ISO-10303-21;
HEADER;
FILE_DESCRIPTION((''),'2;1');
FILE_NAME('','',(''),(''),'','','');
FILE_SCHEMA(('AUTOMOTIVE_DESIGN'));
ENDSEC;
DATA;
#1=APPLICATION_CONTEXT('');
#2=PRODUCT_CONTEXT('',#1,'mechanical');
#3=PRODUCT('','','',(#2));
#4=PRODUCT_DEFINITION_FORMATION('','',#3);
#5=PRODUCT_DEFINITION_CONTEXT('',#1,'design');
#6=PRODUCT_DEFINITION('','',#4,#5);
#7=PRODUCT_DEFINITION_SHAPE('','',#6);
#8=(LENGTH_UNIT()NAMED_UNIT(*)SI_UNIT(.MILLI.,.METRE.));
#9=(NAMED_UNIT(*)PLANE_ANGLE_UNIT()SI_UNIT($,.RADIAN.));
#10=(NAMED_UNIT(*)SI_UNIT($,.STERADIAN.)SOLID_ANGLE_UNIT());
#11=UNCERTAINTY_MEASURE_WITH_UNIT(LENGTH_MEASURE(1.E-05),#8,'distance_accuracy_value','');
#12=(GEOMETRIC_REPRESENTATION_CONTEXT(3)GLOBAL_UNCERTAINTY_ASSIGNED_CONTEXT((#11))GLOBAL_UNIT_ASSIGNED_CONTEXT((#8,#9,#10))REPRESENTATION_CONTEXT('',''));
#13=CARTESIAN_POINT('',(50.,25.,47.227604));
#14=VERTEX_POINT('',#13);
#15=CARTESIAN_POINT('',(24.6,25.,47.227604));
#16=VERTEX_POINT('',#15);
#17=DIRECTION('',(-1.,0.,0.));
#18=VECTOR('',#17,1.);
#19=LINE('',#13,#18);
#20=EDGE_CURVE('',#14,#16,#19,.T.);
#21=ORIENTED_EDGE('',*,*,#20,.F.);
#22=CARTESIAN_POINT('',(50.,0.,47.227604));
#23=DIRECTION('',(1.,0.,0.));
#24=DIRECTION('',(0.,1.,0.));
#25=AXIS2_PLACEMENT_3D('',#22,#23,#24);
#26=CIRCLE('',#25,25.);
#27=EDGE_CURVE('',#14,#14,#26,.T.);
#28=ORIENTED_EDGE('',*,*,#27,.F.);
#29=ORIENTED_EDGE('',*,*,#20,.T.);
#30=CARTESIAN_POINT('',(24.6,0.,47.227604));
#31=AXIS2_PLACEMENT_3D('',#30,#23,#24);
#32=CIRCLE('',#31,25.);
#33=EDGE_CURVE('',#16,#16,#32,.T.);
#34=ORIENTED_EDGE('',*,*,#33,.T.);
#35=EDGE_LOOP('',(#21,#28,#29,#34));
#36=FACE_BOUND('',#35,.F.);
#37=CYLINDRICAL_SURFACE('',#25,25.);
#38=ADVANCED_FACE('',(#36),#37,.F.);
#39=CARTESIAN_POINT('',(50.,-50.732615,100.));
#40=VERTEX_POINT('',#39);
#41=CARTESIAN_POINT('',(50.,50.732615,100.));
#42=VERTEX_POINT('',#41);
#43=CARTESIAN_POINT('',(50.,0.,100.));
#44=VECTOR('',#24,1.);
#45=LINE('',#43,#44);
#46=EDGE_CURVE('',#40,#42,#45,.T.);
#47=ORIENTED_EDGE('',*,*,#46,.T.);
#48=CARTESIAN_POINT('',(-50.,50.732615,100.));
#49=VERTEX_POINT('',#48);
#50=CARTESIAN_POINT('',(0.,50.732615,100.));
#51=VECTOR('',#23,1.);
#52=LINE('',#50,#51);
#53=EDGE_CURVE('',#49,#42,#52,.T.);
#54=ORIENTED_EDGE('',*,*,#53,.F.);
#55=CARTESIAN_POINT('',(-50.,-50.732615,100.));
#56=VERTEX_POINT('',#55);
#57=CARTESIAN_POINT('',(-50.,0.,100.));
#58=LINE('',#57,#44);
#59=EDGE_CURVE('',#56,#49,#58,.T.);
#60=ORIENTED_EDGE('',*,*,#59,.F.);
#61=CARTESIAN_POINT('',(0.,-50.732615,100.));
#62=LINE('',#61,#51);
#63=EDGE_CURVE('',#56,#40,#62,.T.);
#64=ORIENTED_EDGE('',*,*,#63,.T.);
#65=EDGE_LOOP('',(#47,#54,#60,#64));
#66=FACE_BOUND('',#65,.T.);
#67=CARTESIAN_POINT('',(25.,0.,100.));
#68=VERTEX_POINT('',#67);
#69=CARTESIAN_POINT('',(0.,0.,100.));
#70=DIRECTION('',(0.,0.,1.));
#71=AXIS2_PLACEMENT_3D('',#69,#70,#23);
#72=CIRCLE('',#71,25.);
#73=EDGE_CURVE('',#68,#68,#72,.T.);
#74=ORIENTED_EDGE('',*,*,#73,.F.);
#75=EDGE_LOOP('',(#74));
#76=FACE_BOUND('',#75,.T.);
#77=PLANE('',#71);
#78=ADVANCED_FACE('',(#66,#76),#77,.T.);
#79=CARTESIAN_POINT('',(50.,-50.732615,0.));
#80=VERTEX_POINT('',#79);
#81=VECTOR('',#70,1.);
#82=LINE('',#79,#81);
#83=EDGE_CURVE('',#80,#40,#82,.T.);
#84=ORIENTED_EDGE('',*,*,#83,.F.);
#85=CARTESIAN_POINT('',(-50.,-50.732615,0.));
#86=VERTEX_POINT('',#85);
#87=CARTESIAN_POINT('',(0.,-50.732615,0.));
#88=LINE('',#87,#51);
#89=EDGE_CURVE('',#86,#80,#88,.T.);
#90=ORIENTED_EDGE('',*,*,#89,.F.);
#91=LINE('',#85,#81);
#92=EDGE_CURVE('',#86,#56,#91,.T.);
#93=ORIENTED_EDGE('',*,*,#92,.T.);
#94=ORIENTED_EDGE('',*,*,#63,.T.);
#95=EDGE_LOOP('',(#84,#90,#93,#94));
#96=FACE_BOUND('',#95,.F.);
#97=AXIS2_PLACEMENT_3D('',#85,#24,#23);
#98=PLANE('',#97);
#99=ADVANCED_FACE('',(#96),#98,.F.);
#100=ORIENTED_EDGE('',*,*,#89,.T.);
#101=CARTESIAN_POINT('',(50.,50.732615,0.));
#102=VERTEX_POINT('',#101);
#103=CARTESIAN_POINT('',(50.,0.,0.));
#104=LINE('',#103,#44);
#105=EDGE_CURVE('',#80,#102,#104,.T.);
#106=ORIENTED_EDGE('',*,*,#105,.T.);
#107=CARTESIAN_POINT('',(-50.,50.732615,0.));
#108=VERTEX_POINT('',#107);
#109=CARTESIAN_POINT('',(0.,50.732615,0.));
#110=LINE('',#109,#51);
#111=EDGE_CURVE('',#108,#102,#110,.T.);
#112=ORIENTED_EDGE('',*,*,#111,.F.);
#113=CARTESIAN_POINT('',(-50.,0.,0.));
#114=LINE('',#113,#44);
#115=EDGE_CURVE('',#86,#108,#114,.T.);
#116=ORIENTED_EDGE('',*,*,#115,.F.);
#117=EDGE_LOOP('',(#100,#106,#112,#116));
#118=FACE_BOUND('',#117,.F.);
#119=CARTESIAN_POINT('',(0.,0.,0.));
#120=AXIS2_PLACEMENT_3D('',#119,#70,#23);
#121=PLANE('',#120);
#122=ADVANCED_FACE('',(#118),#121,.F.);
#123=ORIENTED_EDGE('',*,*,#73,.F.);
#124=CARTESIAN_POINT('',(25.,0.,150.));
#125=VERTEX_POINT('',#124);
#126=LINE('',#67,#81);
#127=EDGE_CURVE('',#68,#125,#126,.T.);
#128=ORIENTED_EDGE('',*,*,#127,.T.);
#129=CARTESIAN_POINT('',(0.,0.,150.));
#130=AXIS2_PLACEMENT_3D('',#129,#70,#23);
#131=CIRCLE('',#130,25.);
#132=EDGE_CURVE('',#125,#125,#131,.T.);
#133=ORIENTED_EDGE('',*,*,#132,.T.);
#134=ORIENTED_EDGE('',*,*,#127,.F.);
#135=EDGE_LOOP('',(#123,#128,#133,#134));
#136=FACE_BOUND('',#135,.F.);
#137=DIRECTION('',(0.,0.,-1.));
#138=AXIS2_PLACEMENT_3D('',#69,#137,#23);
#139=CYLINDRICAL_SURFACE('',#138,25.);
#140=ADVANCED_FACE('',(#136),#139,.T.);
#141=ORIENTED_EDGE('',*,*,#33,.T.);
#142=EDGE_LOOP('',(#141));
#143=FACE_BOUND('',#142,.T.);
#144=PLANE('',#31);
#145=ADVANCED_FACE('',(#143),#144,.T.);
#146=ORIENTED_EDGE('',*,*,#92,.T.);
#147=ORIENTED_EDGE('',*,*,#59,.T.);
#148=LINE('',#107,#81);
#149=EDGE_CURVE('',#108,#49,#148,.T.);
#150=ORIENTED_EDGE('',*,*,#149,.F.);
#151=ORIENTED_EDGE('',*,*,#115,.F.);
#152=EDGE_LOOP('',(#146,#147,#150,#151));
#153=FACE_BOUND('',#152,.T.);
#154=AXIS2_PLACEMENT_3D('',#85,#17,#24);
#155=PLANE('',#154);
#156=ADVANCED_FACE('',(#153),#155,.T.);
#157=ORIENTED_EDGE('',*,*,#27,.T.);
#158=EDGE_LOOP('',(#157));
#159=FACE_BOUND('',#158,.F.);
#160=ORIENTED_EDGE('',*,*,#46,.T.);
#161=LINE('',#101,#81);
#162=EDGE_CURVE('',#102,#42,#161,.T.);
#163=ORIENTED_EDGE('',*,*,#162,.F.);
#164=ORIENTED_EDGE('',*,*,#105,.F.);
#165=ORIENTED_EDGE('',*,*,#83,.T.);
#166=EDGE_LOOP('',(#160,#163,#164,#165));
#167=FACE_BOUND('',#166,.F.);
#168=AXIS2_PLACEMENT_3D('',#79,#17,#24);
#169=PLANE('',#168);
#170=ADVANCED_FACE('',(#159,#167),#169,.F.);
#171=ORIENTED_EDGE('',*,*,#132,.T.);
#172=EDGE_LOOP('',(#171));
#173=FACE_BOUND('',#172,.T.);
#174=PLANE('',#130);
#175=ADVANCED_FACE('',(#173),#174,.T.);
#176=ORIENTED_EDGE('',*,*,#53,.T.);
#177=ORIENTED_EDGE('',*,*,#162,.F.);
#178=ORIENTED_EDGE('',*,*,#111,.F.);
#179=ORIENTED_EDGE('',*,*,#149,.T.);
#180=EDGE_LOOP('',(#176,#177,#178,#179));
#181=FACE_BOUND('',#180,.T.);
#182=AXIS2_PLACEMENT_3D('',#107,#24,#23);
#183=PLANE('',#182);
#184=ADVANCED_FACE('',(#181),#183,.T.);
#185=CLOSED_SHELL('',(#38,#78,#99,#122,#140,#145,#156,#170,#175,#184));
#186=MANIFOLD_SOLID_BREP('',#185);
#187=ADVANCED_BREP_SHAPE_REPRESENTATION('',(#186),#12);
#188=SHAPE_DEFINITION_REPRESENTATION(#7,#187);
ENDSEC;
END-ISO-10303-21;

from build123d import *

# Parameters (mm, degrees)
F0_W     = 100
F0_H     = 101.4652305061
F1_DEPTH = 100
F2_R     = 25
F3_DEPTH = 50
F4_R     = 25
F5_DEPTH = 50
F7_DEPTH = 25.4
F8_R     = 25
F9_DEPTH = 25.4


# Not quite as in the source:
# - the program builds the solid bodies; features that only make, move or delete a surface that nothing else refers to are left out


with BuildPart() as f1:
    # F0 (on Top) → F1 (new body)
    with BuildSketch(Plane.XY):
        Rectangle(F0_W, F0_H)
    extrude(amount=F1_DEPTH)

    # F2 (on face) → F3 (join)
    with BuildSketch(Plane.XY.offset(100)):
        Circle(F2_R)
    extrude(amount=F3_DEPTH)

    # F4 (on Top) → F5 (join)
    with BuildSketch(Plane.XY):
        Circle(F4_R)
    extrude(amount=F5_DEPTH)

    # F4 (on Top) → F7 (join)
    with BuildSketch(Plane.XY):
        Circle(F4_R)
    extrude(amount=F7_DEPTH)

    # F8 (on face) → F9 (cut)
    with BuildSketch(Plane.YZ.offset(50)):
        with Locations((0, 47.2276035258)):
            Circle(F8_R)
    extrude(amount=-F9_DEPTH, mode=Mode.SUBTRACT)


solid = f1.part
